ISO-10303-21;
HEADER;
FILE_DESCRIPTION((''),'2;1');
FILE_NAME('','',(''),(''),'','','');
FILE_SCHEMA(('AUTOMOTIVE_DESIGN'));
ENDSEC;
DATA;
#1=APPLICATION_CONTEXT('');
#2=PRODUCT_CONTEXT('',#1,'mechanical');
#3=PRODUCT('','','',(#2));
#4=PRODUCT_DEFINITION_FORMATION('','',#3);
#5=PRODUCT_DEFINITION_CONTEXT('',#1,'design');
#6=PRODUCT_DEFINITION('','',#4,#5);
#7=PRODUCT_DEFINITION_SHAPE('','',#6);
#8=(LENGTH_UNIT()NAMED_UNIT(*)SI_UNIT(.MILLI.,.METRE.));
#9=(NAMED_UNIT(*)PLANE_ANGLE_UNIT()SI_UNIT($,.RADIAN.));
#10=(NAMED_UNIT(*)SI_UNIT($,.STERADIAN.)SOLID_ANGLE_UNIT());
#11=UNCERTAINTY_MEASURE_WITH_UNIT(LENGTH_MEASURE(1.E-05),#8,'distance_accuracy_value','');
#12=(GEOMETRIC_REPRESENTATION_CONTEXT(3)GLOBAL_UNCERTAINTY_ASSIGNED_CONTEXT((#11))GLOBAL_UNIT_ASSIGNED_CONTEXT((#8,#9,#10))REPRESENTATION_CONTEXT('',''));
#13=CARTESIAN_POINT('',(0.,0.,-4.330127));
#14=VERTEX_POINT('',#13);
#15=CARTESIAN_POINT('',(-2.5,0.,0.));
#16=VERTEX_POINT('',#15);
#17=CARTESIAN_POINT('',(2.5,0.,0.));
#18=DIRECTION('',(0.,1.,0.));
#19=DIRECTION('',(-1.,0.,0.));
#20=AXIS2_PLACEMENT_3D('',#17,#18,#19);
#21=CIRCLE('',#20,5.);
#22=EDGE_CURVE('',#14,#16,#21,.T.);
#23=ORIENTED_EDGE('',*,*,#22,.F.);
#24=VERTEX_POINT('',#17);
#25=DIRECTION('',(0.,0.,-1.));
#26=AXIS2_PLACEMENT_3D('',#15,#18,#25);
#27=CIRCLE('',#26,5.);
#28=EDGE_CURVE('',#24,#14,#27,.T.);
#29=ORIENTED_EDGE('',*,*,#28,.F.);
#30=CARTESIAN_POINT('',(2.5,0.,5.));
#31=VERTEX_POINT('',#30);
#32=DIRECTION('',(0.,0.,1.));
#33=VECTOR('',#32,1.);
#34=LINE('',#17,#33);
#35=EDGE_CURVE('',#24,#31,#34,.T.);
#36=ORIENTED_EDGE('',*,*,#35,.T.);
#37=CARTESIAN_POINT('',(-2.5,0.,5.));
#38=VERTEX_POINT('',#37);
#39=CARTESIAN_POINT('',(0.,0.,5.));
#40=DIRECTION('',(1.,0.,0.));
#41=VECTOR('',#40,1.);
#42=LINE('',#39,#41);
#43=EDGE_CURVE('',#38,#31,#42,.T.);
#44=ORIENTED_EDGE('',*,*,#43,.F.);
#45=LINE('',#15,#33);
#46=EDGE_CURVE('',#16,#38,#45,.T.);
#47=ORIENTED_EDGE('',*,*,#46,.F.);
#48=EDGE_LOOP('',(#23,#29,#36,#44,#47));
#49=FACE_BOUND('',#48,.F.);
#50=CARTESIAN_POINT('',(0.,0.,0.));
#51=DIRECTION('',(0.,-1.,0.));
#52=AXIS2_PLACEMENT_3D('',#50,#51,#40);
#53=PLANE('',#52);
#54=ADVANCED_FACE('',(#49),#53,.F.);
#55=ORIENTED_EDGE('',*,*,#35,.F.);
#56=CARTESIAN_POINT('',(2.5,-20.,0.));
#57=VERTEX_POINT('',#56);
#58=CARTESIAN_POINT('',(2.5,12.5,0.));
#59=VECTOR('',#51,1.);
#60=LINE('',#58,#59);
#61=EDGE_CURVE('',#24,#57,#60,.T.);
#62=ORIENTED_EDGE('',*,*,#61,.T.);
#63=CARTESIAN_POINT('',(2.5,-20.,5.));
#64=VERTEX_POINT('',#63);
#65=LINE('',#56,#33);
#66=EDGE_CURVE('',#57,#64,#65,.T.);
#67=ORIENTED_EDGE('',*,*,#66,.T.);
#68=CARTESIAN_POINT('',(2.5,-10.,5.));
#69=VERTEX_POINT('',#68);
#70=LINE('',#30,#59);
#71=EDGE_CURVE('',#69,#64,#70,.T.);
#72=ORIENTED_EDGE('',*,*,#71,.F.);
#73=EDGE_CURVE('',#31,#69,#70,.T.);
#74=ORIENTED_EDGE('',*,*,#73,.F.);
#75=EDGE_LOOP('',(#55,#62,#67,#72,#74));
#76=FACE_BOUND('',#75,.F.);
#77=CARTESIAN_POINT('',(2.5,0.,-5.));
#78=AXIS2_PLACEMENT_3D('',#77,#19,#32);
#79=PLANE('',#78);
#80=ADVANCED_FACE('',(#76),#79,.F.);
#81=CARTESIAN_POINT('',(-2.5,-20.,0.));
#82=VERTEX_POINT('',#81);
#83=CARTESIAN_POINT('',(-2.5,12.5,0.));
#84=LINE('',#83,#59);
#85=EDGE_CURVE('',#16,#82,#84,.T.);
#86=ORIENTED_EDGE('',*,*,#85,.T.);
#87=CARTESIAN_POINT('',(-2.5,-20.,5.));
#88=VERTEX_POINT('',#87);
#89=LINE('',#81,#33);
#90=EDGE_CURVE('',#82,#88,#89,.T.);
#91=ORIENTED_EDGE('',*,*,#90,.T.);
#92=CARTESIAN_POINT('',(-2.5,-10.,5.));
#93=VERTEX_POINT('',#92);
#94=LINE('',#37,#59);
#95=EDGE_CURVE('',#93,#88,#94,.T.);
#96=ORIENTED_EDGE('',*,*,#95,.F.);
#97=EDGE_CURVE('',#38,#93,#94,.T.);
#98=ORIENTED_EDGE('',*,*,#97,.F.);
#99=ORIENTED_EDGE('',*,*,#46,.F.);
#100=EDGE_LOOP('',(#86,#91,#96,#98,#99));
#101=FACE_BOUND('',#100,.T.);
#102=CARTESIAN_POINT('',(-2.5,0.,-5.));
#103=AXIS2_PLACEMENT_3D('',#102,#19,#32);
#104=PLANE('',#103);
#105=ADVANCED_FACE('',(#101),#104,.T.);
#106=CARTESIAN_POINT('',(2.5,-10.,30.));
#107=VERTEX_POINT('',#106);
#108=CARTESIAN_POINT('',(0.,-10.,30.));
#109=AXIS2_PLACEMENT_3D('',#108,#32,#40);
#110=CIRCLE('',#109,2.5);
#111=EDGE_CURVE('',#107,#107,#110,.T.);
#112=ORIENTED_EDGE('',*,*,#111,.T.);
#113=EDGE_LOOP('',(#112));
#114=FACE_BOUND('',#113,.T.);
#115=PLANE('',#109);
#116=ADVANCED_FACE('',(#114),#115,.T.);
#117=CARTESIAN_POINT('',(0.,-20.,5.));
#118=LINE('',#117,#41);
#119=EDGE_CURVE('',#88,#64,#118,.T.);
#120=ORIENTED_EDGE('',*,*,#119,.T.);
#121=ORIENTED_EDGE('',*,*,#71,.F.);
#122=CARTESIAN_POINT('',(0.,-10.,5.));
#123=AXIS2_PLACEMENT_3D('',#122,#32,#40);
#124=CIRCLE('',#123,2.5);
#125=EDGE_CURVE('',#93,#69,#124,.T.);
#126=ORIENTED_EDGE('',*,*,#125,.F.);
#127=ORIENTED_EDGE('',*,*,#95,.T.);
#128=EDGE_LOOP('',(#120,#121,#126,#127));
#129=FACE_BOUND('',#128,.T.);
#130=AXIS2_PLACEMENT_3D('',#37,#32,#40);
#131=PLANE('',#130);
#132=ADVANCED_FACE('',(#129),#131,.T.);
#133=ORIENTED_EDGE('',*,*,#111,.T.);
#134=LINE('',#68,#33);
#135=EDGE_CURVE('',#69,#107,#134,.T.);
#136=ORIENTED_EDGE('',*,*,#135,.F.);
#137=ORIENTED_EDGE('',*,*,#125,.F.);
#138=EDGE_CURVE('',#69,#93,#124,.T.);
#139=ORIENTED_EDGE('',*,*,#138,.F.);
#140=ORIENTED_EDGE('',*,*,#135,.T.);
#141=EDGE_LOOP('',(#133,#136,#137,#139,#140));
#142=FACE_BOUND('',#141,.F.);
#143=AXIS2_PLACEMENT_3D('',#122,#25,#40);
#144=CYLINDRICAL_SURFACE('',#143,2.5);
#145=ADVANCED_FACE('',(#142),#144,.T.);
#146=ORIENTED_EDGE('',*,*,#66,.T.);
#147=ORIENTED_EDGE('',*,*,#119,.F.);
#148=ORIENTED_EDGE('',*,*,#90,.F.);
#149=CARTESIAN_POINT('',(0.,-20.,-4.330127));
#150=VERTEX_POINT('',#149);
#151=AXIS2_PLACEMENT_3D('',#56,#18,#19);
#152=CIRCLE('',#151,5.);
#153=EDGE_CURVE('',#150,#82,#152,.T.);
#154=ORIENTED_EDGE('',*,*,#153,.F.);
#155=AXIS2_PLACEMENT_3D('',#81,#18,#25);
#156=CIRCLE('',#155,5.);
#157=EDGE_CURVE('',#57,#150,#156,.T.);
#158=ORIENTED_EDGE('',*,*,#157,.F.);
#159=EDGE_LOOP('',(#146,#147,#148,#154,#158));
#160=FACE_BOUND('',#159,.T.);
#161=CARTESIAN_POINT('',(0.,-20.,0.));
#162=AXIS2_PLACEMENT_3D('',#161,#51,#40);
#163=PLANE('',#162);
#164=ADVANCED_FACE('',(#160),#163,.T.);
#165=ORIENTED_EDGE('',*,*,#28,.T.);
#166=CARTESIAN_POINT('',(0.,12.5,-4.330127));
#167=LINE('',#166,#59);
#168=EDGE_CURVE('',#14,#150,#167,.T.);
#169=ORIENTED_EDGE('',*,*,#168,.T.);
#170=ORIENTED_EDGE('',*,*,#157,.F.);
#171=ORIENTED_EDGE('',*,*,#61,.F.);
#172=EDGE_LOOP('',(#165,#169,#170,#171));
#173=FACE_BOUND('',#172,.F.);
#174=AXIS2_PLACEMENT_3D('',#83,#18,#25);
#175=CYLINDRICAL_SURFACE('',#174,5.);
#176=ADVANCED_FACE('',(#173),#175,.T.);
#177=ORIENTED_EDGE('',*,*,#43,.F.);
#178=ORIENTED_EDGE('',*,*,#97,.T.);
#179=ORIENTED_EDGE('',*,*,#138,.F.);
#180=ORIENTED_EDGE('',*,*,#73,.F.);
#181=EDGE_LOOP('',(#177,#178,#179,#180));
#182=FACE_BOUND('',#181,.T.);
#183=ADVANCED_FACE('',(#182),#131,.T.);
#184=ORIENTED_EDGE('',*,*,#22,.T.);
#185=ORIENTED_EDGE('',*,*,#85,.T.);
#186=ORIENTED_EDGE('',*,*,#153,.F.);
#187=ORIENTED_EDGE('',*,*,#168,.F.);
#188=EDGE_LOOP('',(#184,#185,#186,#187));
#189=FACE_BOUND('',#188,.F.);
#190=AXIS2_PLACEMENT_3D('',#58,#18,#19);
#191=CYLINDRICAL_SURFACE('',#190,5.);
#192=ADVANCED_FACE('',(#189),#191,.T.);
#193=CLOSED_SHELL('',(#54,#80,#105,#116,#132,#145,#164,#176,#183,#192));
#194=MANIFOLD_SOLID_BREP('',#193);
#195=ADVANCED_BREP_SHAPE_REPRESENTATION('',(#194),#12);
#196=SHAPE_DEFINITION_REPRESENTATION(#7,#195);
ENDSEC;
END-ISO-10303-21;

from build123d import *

# Parameters (mm, degrees)
F0_W        = 5
F0_H        = 10
F1_DEPTH    = 20
F2_T1_DEPTH = 45
F3_R        = 2.5
F4_DEPTH    = 25


# Not quite as in the source:
# - a fillet or chamfer that OpenCascade refuses, or shapes differently, is made with other operations: its cross-section is extruded or revolved along the edge and cut away or added


with BuildPart() as f1:
    # F0 (on Front) → F1 (new body)
    with BuildSketch(Plane.XZ):
        Rectangle(F0_W, F0_H)
    extrude(amount=F1_DEPTH)

    # F2: fillet of radius 5 on 2 edges, made by hand

    # F2_s2 → F2_t1 (cut)
    with BuildSketch(Plane.XZ.offset(-12.5)):
        with BuildLine():
            ThreePointArc((-2.5, 0), (-1.0355339059, -3.5355339059), (2.5, -5))
            Line((2.5, -5), (-2.5, -5))
            Line((-2.5, -5), (-2.5, 0))
        make_face()
        with BuildLine():
            ThreePointArc((-2.5, -5), (1.0355339059, -3.5355339059), (2.5, 0))
            Line((2.5, 0), (2.5, -5))
            Line((2.5, -5), (-2.5, -5))
        make_face()
    extrude(amount=F2_T1_DEPTH, mode=Mode.SUBTRACT)

    # F3 (on face) → F4 (join)
    with BuildSketch(Plane.XY.offset(5)):
        with Locations((0, -10)):
            Circle(F3_R)
    extrude(amount=F4_DEPTH)


solid = f1.part
